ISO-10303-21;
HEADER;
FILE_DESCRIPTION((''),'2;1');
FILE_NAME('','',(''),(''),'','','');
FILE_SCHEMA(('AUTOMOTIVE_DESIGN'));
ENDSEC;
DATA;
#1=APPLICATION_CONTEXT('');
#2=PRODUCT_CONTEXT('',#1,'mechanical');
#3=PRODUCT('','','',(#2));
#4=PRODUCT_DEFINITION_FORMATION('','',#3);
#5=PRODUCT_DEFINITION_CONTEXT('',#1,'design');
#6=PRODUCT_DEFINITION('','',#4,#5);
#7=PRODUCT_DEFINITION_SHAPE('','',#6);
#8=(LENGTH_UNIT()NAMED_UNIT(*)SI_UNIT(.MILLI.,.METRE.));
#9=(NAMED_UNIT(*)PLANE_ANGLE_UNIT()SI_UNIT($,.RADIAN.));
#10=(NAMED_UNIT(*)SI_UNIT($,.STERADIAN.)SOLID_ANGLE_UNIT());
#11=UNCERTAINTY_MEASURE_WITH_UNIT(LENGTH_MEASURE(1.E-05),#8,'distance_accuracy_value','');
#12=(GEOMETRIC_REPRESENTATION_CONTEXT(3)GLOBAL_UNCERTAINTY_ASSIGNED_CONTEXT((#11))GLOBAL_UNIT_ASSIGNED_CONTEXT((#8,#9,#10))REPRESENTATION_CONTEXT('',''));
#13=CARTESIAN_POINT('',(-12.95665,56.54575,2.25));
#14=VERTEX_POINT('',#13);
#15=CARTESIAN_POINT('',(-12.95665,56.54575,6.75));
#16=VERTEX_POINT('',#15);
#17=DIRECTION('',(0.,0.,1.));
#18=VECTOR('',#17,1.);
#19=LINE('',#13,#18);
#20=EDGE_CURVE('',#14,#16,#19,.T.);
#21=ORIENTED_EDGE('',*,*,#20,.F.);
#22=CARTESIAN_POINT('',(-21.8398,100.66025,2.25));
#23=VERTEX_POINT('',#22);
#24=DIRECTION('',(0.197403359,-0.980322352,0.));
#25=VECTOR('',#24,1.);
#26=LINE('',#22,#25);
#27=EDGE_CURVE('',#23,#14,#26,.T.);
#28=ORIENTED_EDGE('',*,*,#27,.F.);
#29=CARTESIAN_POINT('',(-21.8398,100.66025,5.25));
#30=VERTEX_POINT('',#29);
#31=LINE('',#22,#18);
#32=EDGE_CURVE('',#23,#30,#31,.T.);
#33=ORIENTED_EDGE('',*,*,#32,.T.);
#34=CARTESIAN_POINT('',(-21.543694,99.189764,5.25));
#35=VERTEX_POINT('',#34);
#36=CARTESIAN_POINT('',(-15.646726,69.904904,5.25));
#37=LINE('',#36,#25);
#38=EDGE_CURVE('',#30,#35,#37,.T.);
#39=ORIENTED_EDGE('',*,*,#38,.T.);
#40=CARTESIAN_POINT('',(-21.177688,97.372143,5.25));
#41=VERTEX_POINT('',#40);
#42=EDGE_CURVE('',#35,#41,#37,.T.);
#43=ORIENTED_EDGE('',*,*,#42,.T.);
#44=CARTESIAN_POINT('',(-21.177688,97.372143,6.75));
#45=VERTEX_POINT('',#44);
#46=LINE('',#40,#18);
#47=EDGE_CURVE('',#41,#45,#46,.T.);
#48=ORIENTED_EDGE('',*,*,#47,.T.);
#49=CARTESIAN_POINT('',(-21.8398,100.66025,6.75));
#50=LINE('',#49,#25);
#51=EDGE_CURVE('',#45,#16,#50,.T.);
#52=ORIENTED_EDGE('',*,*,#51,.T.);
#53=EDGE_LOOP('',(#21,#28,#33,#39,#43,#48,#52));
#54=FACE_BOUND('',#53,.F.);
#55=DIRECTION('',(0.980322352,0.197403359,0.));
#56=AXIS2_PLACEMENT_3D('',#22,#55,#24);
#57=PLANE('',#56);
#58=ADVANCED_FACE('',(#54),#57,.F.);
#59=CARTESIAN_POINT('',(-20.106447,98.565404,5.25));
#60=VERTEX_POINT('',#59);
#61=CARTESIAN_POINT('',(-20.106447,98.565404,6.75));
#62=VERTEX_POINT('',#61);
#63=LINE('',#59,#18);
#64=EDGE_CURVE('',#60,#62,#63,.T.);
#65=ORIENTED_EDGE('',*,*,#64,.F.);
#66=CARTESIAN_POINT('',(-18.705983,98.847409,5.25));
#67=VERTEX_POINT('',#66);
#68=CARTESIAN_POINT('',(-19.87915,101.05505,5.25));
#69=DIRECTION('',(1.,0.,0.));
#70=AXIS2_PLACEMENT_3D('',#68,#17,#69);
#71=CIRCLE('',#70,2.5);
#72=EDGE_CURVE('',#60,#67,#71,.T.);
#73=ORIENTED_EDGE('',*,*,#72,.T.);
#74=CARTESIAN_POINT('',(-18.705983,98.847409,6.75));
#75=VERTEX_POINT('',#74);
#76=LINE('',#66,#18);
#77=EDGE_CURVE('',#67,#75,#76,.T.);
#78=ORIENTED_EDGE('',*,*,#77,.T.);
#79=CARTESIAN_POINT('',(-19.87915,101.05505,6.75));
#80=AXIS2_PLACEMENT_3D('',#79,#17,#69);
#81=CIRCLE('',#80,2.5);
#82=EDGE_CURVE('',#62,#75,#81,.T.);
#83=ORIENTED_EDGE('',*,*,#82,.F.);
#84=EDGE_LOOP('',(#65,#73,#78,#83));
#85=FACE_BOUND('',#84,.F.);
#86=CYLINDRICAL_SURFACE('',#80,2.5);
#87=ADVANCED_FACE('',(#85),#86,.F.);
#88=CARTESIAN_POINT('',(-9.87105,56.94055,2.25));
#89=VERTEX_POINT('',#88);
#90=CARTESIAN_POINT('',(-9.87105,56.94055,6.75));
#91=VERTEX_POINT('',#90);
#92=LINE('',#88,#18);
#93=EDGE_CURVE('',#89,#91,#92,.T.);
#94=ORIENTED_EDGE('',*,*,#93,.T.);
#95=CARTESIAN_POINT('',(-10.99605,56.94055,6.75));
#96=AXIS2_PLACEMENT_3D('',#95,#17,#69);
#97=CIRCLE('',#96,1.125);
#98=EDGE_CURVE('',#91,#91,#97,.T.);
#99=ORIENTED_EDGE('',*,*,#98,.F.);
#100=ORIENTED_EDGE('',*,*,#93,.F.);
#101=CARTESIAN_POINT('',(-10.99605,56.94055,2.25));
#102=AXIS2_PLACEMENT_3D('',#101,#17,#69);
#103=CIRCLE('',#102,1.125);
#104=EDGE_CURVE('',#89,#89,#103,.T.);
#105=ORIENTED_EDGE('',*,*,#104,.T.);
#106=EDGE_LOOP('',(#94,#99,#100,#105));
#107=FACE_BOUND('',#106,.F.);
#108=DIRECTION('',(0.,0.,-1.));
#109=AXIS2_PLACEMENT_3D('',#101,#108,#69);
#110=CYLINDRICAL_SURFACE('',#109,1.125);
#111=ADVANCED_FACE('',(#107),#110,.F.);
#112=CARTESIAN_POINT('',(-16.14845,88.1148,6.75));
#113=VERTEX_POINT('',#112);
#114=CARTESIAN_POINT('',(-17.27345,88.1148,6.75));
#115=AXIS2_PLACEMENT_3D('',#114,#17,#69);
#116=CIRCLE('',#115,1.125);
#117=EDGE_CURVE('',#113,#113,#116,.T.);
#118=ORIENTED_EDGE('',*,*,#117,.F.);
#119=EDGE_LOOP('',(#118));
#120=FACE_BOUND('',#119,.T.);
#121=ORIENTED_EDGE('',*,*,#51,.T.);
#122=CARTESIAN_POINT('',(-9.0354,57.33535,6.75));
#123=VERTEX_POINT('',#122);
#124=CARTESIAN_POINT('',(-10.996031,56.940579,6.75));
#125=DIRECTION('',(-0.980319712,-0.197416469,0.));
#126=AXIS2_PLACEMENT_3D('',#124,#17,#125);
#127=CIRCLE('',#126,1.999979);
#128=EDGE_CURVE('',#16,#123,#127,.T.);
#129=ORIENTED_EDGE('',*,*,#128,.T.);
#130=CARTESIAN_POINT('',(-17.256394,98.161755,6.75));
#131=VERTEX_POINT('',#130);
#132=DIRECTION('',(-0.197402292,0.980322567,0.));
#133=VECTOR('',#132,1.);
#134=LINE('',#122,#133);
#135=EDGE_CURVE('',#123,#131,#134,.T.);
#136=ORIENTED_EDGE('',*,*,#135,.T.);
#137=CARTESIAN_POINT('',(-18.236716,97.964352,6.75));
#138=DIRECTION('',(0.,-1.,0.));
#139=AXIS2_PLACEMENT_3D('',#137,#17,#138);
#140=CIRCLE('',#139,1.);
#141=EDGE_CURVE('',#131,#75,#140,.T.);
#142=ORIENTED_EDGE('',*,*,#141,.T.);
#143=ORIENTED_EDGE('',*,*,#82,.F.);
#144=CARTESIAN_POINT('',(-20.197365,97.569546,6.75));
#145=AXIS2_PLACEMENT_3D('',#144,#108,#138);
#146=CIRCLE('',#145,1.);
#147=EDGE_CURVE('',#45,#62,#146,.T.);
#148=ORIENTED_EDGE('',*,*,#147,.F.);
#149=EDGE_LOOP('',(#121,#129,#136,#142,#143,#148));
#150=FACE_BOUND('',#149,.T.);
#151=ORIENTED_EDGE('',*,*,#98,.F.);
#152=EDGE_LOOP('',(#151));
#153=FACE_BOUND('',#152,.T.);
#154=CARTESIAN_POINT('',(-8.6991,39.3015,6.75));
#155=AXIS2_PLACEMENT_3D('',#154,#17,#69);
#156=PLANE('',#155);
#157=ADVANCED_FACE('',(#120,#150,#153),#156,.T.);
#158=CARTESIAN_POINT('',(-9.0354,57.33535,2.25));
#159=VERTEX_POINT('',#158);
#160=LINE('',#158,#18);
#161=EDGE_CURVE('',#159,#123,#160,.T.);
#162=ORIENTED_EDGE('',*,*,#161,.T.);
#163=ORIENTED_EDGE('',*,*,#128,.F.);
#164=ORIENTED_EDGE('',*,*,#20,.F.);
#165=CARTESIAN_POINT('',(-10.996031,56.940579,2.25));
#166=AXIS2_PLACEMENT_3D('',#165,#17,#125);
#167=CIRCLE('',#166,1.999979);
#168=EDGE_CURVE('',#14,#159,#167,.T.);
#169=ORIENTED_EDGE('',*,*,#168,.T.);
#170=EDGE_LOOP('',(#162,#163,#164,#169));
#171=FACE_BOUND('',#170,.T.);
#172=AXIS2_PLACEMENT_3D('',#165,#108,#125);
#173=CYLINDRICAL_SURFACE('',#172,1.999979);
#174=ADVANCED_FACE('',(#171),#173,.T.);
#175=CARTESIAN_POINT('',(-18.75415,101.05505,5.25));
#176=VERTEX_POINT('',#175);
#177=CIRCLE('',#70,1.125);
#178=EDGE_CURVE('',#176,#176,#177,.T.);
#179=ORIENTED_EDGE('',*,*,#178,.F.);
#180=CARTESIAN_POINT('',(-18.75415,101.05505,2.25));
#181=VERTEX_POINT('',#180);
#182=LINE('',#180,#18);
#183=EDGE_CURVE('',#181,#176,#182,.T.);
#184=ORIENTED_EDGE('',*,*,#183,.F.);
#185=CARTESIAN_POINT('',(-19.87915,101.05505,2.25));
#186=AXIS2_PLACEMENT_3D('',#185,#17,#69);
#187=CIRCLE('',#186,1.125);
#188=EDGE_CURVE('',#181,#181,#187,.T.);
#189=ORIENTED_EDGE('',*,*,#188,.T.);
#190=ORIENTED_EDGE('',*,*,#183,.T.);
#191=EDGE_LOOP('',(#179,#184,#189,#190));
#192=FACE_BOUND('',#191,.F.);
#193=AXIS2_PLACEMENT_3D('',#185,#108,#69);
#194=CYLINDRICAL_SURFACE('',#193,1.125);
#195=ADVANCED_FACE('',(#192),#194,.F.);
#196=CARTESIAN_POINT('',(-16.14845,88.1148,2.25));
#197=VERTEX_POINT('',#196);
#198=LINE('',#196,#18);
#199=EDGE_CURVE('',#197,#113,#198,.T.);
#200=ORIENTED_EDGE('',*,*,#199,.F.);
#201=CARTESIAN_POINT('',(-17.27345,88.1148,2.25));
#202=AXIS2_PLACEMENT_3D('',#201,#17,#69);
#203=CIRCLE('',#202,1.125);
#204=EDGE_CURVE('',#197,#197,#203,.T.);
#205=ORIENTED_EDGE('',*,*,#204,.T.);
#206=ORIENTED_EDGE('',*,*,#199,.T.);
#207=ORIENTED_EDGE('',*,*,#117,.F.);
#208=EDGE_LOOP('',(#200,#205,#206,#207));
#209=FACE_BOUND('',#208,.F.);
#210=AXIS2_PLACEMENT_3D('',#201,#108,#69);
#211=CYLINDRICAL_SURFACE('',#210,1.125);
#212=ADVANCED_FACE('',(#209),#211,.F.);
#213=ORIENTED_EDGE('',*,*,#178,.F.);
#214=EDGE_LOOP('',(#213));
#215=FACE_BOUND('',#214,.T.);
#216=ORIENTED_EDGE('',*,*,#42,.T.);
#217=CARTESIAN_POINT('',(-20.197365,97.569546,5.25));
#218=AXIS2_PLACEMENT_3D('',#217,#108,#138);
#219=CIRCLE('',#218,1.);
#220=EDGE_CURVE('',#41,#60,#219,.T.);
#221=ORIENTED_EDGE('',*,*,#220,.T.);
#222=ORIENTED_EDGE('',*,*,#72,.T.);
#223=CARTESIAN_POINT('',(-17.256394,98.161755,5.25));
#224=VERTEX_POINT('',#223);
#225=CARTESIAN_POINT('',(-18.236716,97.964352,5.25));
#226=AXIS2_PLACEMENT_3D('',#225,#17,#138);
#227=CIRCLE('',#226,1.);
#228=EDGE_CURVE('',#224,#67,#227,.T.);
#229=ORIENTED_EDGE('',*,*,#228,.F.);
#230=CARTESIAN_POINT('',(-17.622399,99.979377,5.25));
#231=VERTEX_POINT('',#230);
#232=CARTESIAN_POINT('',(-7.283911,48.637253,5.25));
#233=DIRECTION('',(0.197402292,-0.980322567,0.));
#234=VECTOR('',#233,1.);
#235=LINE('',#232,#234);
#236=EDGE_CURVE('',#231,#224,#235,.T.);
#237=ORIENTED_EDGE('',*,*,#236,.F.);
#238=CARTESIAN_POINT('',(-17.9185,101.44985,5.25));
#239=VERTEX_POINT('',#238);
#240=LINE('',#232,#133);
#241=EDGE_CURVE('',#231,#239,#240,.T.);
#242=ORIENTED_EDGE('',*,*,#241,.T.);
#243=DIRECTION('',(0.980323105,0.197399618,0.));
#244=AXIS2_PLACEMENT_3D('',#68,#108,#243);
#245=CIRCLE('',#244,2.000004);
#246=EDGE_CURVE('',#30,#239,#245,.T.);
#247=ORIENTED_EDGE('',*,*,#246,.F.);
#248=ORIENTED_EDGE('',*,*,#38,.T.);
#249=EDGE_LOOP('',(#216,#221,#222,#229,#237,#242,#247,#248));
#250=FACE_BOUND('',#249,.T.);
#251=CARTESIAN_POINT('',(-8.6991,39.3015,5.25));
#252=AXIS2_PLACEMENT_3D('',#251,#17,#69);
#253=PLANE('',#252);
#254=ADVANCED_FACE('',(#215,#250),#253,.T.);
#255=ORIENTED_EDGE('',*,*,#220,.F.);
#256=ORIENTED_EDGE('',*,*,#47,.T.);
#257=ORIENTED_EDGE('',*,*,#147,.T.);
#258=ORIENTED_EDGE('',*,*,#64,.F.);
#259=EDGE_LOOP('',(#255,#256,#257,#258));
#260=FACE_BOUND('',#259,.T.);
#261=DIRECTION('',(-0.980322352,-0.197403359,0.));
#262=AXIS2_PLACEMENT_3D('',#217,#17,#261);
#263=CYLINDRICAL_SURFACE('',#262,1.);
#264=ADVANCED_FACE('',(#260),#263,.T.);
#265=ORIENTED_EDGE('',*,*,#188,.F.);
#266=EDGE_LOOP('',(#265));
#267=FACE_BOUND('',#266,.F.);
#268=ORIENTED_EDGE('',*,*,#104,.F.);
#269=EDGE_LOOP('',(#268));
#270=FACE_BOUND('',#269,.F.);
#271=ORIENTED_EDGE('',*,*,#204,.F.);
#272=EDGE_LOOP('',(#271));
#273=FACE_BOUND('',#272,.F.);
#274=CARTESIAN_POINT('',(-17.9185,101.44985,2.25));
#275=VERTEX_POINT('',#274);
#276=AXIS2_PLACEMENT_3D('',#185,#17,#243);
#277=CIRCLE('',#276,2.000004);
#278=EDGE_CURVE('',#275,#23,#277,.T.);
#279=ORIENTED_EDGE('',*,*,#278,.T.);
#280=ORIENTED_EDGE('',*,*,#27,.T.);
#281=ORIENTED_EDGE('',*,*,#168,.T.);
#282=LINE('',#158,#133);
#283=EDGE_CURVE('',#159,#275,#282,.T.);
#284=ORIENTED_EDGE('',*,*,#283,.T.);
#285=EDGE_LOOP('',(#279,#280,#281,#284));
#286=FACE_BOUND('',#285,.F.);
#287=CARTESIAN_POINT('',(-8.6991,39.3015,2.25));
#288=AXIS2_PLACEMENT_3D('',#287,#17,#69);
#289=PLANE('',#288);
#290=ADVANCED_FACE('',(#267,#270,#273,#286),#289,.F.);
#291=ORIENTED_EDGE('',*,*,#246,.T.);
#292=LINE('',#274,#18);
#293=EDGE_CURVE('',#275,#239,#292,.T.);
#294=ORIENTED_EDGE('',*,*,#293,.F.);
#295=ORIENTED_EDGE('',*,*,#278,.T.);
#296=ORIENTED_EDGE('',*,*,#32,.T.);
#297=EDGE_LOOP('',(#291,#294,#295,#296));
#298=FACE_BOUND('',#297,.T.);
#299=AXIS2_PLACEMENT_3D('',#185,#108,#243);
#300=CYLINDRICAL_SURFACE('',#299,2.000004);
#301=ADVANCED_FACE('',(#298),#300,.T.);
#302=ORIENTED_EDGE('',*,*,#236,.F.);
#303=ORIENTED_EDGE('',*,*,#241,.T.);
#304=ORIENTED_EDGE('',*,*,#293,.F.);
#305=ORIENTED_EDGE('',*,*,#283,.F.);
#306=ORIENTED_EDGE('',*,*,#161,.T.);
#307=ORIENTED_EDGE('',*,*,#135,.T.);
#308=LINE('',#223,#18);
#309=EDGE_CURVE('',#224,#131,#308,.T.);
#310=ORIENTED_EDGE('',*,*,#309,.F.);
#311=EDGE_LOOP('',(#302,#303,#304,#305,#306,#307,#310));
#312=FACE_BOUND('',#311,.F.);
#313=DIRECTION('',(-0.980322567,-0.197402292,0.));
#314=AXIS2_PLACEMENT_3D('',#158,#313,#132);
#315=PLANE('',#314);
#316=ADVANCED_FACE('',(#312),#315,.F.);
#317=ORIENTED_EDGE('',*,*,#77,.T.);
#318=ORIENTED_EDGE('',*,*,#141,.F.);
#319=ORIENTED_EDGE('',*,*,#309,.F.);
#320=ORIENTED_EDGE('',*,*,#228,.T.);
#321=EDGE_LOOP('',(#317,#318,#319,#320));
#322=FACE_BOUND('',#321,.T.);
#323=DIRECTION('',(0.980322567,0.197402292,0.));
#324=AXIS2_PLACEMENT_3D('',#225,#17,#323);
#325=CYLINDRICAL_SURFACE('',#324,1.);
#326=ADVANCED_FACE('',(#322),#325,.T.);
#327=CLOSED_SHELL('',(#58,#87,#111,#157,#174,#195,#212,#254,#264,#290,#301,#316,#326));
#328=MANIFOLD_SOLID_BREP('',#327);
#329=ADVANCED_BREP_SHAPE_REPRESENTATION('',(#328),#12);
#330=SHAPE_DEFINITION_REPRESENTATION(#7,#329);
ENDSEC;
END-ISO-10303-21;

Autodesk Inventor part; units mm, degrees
ref_plane "YZ Plane" through (0, 0, 0) normal (1, 0, 0) x (0, 1, 0)
ref_plane "XZ Plane" through (0, 0, 0) normal (0, 1, 0) x (-1, 0, 0)
ref_plane "XY Plane" through (0, 0, 0) normal (0, 0, 1) x (1, 0, 0)
sketch "Sketch1" plane through (0, 0, 0) normal (0, 0, 1) x (1, 0, 0)
  circle A0 centre (-4.5939, 35.2781) radius 2.25 projected
  circle A1 centre (-17.1487, 97.6266) radius 2.25 projected
  circle A2 centre (-22.3601, 123.5071) radius 2.25 projected
  line L0 (-4.5939, 35.2781) -> (-22.3601, 123.5071) construction
  line L1 (-0.6726, 36.0677) -> (-18.4388, 124.2967)
  line L2 (-26.2814, 122.7175) -> (-8.5151, 34.4885)
  arc A3 (-8.5151, 34.4885) -> (-0.6726, 36.0677) centre (-4.5939, 35.2781) ccw
  arc A4 (-18.4388, 124.2967) -> (-26.2814, 122.7175) centre (-22.3601, 123.5071) ccw
  point P0 (0, 0)
  point P1 (-13.477, 79.3926)
  dimension "d0" = 8
extrude "Extrusion1" add sketch "Sketch1" along normal blind 9
sketch "Sketch2" plane through (0, 0, 9) normal (0, 0, 1) x (1, 0, 0)
  circle A0 centre (-22.3601, 123.5071) radius 2.25 projected
  circle A1 centre (-22.3601, 123.5071) radius 5
  point P0 (0, 0)
  dimension "d3" = 10
extrude "Extrusion2" cut sketch "Sketch2" against normal blind 3
fillet "Fillet1" radius 2 2 edges at (-25.6892, 119.7766, 7.5) (-17.8466, 121.3558, 7.5)
scale "Scale1" factors (0.5, 0.5, 0.5) then translate (-8.6991, 39.3015, 2.25) bodies 1
properties part number "MasiveBone1"
